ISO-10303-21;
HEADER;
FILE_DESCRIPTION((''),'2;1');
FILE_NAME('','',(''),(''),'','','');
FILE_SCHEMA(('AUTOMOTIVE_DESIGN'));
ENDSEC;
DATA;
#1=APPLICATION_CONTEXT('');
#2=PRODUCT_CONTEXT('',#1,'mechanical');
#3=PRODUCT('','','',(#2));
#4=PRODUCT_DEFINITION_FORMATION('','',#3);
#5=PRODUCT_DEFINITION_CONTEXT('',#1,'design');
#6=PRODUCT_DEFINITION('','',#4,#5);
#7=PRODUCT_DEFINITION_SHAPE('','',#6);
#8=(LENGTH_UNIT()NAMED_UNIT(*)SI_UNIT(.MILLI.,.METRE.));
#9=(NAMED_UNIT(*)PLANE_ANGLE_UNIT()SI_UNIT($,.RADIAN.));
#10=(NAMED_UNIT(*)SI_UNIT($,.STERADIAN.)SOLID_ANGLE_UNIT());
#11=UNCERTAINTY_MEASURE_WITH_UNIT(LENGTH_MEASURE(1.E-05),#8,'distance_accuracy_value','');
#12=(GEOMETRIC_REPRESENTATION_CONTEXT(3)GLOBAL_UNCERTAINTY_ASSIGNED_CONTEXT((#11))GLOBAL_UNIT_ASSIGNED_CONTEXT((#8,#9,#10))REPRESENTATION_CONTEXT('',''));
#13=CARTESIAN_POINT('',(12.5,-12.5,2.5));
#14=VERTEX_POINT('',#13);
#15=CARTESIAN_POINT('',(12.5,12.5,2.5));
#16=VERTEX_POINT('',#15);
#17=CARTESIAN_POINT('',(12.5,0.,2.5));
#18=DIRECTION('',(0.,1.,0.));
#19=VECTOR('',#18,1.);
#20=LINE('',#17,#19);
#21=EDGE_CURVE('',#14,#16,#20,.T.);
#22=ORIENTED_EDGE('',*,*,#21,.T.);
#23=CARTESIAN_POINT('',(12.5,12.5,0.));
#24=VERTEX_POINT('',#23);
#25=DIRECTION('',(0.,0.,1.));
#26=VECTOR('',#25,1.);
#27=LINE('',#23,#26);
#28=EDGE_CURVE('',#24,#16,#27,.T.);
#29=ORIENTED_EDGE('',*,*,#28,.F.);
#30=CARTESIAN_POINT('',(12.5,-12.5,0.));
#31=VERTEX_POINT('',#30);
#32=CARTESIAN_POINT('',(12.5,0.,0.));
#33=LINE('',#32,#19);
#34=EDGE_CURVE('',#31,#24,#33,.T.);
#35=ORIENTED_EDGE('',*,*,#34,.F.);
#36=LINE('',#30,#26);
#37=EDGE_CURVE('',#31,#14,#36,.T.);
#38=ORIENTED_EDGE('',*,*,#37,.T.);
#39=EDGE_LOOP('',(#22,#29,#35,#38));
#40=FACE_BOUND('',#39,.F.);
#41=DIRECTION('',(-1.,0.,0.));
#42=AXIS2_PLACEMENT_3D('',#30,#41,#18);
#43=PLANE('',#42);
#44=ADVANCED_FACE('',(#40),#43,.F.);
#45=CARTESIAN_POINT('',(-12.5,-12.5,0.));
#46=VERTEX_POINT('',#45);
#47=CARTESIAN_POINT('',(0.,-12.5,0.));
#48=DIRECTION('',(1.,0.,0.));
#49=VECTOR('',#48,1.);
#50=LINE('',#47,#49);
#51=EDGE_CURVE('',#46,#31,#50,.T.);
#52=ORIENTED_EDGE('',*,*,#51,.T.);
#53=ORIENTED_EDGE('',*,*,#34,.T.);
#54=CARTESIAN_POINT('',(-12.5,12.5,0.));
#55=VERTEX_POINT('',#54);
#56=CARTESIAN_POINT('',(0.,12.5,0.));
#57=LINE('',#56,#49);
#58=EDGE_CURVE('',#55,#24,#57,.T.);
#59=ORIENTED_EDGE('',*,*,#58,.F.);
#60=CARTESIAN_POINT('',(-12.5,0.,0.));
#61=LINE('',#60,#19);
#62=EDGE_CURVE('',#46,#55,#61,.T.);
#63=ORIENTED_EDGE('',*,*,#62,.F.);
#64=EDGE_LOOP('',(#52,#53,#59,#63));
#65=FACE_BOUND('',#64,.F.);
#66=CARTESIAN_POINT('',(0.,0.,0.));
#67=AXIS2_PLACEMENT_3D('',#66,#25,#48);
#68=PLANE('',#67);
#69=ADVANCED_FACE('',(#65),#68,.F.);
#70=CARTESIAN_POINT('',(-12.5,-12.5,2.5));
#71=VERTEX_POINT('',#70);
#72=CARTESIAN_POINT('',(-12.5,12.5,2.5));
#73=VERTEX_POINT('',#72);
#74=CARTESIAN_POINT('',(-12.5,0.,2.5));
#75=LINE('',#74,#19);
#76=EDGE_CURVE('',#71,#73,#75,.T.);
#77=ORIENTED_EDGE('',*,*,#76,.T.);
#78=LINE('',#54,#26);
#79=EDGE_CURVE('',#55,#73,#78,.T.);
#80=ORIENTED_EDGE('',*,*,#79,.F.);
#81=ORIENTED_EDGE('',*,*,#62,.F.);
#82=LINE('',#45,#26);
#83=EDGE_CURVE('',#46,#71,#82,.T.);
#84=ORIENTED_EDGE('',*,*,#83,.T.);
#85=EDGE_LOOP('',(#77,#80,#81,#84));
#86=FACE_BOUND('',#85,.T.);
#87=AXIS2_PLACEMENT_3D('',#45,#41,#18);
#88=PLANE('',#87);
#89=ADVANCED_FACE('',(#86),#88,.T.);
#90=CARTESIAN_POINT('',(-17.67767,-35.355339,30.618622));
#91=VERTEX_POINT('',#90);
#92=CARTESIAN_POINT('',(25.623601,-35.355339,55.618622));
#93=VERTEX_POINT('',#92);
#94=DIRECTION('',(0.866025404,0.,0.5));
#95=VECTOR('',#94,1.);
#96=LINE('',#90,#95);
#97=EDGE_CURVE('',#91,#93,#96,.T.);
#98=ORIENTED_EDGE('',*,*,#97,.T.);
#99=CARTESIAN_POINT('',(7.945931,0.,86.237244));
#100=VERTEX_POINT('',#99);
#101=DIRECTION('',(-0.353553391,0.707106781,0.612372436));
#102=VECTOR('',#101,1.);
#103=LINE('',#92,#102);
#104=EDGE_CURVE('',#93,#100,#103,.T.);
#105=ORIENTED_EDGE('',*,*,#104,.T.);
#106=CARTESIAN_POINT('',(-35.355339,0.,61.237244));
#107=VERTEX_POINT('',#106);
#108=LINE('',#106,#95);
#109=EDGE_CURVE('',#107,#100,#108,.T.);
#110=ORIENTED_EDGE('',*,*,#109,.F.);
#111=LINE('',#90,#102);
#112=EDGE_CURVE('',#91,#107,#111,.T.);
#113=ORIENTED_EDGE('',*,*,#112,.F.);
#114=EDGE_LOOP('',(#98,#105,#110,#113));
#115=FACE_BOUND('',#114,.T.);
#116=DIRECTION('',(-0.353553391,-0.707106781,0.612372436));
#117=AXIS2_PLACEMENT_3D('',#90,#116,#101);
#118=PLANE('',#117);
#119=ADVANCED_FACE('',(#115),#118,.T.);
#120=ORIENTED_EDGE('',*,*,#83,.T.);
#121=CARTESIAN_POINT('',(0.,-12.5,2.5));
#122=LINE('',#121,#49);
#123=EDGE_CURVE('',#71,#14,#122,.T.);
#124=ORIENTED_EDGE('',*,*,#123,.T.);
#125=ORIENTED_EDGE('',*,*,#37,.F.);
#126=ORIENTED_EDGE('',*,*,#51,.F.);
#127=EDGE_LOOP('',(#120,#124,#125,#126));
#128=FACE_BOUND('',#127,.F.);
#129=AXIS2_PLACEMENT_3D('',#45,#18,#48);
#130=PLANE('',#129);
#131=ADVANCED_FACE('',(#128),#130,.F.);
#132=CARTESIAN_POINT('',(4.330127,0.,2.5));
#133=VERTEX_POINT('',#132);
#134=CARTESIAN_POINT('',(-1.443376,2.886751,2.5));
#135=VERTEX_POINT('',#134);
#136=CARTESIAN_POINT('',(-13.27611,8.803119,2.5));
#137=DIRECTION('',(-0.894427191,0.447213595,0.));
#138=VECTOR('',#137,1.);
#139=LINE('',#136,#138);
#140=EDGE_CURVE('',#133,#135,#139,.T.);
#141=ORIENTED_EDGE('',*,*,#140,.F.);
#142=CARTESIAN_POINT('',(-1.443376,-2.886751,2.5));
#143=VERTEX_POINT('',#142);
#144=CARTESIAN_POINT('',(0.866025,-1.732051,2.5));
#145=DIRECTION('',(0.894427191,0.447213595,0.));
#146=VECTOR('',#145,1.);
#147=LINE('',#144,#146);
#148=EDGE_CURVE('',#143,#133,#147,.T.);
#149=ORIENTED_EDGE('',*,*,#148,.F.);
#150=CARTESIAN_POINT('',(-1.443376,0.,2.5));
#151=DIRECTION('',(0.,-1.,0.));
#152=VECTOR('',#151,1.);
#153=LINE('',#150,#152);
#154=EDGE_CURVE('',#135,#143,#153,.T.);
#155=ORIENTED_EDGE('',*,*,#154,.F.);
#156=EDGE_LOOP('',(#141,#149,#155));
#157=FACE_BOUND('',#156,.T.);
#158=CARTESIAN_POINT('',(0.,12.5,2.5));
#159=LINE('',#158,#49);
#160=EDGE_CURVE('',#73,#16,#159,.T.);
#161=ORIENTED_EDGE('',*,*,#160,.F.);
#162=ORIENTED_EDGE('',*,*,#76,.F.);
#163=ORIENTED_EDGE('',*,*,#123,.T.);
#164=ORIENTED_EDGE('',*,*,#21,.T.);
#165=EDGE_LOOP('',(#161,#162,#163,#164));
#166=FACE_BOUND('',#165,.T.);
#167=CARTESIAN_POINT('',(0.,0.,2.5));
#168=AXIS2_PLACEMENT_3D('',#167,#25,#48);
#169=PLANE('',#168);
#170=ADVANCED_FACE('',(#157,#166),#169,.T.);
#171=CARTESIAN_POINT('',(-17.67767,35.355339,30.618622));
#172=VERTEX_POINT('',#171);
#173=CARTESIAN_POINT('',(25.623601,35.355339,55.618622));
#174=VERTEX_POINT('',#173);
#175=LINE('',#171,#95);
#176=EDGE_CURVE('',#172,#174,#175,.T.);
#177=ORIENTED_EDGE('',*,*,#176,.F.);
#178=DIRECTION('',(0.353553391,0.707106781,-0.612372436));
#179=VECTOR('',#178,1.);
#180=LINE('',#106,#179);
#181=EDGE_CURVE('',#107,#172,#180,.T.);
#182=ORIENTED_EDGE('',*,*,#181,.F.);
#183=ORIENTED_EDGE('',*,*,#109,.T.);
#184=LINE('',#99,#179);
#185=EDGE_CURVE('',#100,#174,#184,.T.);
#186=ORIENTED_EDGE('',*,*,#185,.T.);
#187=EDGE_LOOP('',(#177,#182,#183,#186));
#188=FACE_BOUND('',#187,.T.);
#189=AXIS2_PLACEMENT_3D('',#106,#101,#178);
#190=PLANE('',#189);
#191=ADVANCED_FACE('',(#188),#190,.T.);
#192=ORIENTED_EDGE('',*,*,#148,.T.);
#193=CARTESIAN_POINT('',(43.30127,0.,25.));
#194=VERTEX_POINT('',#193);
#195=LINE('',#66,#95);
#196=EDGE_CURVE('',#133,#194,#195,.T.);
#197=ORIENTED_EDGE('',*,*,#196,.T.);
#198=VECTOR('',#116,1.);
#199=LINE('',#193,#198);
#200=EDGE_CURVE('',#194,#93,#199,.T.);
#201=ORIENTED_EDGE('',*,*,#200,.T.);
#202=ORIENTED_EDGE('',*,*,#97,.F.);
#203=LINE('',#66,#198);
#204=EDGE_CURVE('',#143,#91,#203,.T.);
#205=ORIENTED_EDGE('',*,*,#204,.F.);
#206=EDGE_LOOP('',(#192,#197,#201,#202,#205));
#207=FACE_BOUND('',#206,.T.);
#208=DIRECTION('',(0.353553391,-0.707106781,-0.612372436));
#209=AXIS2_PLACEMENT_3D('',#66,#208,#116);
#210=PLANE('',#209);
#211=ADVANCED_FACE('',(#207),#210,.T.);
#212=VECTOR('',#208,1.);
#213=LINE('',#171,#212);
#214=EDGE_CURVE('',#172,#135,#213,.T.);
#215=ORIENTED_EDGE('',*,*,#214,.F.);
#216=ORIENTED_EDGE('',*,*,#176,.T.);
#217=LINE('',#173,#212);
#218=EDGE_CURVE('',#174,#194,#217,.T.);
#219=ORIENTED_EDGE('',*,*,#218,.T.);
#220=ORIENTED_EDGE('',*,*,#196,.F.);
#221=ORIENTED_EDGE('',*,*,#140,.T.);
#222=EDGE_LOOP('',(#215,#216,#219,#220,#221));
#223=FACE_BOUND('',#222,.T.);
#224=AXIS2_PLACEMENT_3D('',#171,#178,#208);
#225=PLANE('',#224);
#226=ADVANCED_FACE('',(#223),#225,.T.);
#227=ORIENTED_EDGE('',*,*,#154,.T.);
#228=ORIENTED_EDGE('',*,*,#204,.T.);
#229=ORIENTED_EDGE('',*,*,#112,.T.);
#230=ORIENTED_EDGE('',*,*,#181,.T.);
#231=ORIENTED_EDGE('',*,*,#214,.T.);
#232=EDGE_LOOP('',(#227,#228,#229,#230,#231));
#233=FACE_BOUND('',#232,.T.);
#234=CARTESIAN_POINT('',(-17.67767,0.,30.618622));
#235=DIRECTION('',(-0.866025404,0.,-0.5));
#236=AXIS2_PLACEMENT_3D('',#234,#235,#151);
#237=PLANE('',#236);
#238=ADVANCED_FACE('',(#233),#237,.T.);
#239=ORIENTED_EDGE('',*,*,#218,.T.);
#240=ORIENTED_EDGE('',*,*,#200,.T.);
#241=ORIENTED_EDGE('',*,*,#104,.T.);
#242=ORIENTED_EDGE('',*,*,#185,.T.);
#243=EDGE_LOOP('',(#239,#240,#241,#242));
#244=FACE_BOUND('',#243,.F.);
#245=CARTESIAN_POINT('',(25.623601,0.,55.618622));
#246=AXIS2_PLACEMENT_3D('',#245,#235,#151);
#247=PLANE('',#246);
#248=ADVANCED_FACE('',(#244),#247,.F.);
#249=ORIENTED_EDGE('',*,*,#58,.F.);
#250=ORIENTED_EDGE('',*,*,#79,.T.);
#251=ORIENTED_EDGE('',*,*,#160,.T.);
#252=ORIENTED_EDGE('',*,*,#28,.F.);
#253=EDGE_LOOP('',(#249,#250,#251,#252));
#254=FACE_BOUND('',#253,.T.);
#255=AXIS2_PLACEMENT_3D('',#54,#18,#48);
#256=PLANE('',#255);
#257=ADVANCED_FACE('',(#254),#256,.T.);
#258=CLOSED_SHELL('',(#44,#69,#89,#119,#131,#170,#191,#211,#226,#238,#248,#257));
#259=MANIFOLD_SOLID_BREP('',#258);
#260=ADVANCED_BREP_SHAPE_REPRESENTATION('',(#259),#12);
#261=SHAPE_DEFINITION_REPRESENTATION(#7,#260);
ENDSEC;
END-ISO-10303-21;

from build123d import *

# Parameters (mm, degrees)
F0_W     = 25
F0_H     = 25
F1_DEPTH = 2.5
F5_DEPTH = 50


# Not quite as in the source:
# - a feature of the source that left no trace in its solid (it failed there, or was rolled back) is left out


with BuildPart() as f1:
    # F0 (on Top) → F1 (new body)
    with BuildSketch(Plane.XY):
        Rectangle(F0_W, F0_H)
    extrude(amount=F1_DEPTH)

    # F4 (on line) → F5 (join)
    with BuildSketch(Plane(origin=(0, 0, 0), x_dir=(0, -1, 0), z_dir=(-0.8660254038, 0, -0.5))):
        Polygon((-35.3553390593, 35.3553390593), (0, 0), (35.3553390593, 35.3553390593), (0, 70.7106781187), align=None)
    extrude(amount=-F5_DEPTH)


solid = f1.part
